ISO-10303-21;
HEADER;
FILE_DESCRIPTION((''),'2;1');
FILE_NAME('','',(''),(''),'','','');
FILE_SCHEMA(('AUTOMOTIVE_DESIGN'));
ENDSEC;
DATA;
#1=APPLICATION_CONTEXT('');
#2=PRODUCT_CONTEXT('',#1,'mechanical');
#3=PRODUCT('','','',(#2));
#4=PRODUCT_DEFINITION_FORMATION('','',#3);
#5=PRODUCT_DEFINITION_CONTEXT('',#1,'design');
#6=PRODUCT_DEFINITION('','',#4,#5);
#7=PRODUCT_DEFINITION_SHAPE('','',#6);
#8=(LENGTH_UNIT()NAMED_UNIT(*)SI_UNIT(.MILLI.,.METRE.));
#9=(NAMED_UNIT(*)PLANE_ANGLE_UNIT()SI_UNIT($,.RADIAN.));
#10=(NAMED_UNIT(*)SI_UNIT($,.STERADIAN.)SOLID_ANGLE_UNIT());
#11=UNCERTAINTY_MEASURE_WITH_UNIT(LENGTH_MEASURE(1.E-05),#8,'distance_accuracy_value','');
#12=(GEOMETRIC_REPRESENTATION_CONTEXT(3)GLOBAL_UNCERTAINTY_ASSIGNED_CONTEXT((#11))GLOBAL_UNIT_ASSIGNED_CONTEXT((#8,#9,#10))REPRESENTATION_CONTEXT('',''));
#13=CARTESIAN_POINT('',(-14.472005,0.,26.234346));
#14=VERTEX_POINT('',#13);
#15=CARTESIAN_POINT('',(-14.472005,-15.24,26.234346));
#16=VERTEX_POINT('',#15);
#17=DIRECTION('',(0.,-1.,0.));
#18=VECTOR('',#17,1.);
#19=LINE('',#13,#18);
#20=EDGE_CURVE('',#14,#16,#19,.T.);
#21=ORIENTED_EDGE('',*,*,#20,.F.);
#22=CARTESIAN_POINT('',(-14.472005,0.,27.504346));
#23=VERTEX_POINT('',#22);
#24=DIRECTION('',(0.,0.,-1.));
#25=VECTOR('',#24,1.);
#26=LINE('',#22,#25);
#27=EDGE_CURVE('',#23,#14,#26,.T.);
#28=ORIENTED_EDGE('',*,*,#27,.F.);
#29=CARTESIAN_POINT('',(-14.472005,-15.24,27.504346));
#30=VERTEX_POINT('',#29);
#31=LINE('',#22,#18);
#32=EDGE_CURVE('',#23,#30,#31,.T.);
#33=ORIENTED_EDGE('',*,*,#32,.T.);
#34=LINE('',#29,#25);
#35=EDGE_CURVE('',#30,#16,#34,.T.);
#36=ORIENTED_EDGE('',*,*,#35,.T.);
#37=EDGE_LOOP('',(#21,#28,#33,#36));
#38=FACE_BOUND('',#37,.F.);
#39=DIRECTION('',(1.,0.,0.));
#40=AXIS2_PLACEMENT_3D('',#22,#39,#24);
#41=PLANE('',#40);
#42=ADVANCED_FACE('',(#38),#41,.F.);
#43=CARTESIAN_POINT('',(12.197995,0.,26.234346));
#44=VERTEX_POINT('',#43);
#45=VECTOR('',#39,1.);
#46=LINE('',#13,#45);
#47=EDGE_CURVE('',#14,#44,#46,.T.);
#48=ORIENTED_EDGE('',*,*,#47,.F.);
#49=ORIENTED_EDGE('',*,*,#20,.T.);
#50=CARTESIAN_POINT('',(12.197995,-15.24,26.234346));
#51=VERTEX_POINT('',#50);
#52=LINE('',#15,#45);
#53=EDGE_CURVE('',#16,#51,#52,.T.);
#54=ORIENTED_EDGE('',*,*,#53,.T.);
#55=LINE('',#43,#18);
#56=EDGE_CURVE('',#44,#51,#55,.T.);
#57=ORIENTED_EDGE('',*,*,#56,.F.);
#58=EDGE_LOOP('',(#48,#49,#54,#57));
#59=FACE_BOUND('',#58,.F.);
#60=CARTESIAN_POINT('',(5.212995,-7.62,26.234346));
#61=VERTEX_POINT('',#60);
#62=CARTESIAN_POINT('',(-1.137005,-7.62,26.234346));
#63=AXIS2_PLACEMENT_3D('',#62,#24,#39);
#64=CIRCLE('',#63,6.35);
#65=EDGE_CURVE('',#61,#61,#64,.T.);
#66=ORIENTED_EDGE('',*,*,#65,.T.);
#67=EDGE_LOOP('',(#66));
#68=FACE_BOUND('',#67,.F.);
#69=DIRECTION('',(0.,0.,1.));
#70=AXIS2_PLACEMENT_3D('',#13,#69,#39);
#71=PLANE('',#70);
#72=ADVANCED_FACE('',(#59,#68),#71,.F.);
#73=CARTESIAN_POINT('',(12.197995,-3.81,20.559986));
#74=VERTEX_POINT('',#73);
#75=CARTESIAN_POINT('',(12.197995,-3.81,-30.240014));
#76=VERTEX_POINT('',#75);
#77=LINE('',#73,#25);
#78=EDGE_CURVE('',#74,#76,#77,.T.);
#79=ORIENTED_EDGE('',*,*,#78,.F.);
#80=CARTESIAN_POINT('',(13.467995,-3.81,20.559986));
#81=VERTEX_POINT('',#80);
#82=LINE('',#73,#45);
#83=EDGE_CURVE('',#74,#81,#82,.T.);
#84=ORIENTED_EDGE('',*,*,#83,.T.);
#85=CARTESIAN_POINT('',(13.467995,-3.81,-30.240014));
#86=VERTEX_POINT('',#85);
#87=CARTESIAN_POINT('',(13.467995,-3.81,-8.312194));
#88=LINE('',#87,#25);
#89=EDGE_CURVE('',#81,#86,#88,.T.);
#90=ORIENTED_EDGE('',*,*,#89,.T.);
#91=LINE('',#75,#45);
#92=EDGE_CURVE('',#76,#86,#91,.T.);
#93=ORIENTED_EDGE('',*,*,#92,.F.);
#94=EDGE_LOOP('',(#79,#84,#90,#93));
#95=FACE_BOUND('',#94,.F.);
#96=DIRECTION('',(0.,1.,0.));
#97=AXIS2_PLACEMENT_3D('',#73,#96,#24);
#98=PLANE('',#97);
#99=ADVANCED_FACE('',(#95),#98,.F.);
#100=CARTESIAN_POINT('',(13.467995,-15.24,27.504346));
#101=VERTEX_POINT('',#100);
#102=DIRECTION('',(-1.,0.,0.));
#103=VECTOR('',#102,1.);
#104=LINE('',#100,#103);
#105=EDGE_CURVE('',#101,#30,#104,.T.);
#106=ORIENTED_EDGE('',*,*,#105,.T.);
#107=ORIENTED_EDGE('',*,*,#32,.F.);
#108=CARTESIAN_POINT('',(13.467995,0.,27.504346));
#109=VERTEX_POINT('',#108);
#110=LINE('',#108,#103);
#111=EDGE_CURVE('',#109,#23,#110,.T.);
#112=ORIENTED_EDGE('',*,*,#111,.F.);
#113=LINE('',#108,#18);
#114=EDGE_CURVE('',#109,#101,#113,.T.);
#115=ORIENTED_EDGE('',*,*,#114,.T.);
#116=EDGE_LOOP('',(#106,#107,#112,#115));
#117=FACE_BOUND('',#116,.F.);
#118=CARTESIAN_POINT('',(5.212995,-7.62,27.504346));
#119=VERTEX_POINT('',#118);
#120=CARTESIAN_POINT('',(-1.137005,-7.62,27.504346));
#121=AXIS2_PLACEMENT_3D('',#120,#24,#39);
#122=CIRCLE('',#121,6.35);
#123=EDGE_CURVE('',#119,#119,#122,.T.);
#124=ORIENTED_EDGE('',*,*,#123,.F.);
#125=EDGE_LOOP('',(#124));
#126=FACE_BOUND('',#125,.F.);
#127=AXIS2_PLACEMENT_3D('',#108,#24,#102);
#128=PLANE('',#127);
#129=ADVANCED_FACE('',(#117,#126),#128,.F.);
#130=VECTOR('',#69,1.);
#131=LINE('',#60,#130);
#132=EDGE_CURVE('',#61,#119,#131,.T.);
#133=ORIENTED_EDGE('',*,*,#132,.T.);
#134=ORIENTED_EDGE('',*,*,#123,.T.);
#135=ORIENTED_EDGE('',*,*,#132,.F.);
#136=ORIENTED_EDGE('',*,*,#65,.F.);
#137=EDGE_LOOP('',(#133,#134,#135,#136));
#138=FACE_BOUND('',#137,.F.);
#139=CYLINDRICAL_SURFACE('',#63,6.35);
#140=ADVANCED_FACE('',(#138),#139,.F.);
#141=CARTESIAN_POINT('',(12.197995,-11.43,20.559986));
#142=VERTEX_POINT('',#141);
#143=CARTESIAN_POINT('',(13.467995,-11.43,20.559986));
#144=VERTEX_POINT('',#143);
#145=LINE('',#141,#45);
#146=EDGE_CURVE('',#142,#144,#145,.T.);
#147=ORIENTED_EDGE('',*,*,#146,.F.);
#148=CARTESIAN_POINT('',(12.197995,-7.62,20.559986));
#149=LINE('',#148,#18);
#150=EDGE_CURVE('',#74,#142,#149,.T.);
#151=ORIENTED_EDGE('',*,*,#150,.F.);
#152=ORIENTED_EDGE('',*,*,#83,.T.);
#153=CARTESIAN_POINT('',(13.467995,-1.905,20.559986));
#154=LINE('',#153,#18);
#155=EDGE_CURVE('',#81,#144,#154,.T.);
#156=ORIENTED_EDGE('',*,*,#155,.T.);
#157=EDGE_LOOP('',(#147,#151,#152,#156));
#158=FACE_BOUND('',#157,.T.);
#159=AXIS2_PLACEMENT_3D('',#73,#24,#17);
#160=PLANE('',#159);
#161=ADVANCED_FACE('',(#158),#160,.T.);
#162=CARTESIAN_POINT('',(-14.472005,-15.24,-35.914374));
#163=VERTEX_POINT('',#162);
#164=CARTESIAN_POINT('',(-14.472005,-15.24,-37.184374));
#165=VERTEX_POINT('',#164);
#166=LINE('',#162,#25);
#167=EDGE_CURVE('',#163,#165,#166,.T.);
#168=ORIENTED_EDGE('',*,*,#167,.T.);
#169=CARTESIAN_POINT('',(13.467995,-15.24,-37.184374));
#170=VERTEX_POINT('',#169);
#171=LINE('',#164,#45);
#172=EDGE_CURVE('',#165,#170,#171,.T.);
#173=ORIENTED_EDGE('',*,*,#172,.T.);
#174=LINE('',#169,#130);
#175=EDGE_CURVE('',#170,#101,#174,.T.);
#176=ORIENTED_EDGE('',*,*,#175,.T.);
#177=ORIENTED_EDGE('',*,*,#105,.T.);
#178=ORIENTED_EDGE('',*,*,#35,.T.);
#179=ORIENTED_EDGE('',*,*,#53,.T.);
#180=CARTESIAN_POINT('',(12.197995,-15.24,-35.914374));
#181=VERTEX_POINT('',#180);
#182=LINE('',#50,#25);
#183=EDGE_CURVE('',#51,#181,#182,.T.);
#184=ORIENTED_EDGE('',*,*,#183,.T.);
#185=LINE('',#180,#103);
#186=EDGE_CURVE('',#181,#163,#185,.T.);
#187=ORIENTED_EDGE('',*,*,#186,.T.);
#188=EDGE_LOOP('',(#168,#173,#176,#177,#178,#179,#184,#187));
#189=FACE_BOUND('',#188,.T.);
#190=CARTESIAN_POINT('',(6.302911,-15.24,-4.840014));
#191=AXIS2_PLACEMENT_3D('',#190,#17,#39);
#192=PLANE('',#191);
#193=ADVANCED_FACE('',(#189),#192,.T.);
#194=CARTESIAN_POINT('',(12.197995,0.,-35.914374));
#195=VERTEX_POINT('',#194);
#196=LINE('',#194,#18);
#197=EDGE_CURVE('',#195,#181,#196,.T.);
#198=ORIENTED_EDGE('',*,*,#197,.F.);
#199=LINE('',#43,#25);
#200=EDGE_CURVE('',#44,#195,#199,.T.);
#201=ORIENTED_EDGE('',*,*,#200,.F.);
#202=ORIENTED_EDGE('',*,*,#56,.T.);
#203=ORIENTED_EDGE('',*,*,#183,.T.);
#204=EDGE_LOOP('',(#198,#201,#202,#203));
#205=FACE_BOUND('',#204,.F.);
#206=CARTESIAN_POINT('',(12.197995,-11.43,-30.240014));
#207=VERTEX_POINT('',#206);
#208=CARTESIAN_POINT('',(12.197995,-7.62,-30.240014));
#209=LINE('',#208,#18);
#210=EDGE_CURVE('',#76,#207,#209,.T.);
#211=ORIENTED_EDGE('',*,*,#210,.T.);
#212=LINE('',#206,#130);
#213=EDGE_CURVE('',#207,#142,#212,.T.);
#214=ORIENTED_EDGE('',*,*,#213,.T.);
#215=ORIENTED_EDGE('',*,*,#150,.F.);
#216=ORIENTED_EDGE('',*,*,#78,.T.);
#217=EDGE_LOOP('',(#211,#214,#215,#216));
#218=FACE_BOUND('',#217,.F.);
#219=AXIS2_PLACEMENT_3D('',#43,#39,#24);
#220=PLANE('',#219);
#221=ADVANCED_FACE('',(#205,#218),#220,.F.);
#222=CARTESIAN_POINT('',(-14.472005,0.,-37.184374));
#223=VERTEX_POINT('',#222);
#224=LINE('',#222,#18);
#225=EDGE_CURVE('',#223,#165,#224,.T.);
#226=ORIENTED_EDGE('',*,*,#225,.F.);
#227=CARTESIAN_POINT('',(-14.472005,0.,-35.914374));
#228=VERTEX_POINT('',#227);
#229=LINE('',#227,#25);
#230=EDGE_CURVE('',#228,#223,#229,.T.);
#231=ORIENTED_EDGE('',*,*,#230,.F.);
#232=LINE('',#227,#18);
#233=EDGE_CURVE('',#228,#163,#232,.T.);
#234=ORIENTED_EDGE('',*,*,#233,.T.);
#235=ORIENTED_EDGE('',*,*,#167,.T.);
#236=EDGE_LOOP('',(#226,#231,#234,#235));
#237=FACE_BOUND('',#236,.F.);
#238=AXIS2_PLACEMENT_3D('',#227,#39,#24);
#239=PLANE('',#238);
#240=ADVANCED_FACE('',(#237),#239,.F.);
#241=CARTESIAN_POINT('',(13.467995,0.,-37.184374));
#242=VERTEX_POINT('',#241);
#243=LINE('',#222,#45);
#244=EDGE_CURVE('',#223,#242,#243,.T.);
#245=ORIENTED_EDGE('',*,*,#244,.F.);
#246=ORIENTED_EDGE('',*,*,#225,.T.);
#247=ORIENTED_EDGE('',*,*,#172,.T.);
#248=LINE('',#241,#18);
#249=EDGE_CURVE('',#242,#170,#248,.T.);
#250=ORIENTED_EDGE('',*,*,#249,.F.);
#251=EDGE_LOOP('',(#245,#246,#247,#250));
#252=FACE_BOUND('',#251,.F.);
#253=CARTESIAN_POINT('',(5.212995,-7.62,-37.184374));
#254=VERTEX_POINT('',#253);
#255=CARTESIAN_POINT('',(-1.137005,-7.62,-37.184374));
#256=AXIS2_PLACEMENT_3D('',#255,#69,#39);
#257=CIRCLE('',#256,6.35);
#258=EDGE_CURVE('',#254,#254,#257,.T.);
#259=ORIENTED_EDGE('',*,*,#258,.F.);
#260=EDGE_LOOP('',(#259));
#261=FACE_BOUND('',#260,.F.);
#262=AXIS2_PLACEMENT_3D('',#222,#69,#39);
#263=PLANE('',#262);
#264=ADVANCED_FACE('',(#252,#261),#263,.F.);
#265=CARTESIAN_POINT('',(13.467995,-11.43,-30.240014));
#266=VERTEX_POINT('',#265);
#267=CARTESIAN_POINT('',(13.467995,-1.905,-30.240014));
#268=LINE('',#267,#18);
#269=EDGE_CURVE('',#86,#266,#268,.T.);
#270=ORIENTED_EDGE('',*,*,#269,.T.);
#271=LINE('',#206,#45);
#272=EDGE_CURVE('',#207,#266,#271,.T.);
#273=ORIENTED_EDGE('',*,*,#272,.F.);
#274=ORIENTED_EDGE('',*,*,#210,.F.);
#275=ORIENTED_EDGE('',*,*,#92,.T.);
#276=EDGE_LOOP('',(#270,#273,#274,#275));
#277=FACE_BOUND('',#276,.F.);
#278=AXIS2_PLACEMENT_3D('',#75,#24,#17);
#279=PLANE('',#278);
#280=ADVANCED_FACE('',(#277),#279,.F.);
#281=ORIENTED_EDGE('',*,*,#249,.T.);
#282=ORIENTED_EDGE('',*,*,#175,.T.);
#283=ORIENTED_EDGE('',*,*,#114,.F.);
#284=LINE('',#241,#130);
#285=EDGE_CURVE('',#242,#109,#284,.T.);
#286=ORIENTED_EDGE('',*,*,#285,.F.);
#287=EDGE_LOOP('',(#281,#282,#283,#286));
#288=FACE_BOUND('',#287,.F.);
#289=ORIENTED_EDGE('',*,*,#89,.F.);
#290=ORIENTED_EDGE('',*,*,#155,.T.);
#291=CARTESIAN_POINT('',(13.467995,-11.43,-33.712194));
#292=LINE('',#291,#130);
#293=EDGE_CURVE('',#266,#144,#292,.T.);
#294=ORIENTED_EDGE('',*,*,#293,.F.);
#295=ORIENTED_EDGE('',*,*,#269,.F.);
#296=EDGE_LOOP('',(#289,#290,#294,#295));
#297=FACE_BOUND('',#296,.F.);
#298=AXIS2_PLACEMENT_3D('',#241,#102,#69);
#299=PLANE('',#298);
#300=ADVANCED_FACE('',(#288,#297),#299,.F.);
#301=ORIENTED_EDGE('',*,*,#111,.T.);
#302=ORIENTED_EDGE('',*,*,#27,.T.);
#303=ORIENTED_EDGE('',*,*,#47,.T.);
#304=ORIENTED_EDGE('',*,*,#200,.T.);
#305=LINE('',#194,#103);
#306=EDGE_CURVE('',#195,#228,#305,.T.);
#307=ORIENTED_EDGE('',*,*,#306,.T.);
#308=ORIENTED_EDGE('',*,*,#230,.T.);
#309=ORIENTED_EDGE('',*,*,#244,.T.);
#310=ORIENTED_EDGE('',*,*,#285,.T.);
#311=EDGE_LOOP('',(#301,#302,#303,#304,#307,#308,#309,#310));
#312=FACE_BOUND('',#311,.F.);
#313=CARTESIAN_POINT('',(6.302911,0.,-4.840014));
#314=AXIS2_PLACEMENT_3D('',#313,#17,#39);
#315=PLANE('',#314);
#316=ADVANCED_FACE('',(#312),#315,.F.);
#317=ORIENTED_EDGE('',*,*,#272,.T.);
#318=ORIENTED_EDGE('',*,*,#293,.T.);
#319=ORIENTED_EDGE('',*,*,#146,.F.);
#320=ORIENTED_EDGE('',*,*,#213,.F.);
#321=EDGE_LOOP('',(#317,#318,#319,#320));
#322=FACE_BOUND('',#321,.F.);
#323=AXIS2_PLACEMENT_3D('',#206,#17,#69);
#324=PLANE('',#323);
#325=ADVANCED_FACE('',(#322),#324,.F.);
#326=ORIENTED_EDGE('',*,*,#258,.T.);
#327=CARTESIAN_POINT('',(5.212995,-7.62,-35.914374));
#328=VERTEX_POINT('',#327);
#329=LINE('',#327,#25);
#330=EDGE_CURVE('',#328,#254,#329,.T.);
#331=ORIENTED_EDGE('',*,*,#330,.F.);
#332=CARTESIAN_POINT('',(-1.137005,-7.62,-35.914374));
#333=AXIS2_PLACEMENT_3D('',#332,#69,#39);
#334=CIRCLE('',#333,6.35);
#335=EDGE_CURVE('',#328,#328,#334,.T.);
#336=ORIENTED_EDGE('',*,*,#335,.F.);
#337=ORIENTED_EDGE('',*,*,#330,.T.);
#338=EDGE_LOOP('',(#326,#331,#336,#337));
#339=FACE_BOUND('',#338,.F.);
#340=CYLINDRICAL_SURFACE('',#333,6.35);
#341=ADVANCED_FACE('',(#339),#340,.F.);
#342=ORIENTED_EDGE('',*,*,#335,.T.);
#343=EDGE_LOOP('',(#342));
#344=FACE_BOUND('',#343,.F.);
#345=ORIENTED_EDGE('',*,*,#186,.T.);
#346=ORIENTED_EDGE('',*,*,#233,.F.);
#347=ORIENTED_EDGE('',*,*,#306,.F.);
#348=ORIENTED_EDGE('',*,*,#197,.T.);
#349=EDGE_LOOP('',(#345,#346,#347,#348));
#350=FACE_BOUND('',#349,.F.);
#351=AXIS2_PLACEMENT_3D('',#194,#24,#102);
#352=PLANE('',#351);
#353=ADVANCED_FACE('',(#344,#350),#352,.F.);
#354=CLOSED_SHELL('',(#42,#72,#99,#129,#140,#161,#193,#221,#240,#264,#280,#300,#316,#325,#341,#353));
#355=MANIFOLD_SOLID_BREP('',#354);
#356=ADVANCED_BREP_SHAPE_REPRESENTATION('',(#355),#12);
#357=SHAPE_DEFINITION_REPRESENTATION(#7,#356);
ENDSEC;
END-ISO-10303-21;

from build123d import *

# Parameters (mm, degrees)
F1_DEPTH       = 15.24
F4_D           = 12.7
F4_DEPTH       = 1.271
F4_ON_F2_D     = 12.7
F4_ON_F2_DEPTH = 1.271
F5_W           = 7.62
F5_H           = 25.4
F6_DEPTH       = 25.4


# Not quite as in the source:
# - a feature names something its author has since deleted; it is built from what else it names


with BuildPart() as f1:
    # F0 (on Front) → F1 (new body)
    with BuildSketch(Plane.XZ):
        Polygon((-14.4720045709, -37.1843738795), (13.4679954291, -37.1843738795), (13.4679954291, 27.5043461205), (-14.4720045709, 27.5043461205), (-14.4720045709, 26.2343461205), (12.1979954291, 26.2343461205), (12.1979954291, -35.9143738795), (-14.4720045709, -35.9143738795), align=None)
    extrude(amount=F1_DEPTH)

    # F4 (through all, one way)
    with BuildSketch(Plane.XY.offset(-35.9143738795)):
        with Locations((-1.1370045709, -7.62)):
            Circle(F4_D / 2)
    extrude(amount=-F4_DEPTH, mode=Mode.SUBTRACT)

    # F4 on F2 (through all, one way)
    with BuildSketch(Plane(origin=(0, 0, 26.2343461205), x_dir=(1, 0, 0), z_dir=(0, 0, -1))):
        with Locations((-1.1370045709, 7.62)):
            Circle(F4_ON_F2_D / 2)
    extrude(amount=-F4_ON_F2_DEPTH, mode=Mode.SUBTRACT)

    # F5 (on face) → F6 (cut)
    with BuildSketch(Plane(origin=(12.1979954291, 0, 0), x_dir=(0, -1, 0), z_dir=(-1, 0, 0))):
        with Locations((7.62, -17.5400138795)):
            Rectangle(F5_W, F5_H)
        with Locations((7.62, 7.8599861205)):
            Rectangle(F5_W, F5_H)
    extrude(amount=-F6_DEPTH, mode=Mode.SUBTRACT)


solid = f1.part
